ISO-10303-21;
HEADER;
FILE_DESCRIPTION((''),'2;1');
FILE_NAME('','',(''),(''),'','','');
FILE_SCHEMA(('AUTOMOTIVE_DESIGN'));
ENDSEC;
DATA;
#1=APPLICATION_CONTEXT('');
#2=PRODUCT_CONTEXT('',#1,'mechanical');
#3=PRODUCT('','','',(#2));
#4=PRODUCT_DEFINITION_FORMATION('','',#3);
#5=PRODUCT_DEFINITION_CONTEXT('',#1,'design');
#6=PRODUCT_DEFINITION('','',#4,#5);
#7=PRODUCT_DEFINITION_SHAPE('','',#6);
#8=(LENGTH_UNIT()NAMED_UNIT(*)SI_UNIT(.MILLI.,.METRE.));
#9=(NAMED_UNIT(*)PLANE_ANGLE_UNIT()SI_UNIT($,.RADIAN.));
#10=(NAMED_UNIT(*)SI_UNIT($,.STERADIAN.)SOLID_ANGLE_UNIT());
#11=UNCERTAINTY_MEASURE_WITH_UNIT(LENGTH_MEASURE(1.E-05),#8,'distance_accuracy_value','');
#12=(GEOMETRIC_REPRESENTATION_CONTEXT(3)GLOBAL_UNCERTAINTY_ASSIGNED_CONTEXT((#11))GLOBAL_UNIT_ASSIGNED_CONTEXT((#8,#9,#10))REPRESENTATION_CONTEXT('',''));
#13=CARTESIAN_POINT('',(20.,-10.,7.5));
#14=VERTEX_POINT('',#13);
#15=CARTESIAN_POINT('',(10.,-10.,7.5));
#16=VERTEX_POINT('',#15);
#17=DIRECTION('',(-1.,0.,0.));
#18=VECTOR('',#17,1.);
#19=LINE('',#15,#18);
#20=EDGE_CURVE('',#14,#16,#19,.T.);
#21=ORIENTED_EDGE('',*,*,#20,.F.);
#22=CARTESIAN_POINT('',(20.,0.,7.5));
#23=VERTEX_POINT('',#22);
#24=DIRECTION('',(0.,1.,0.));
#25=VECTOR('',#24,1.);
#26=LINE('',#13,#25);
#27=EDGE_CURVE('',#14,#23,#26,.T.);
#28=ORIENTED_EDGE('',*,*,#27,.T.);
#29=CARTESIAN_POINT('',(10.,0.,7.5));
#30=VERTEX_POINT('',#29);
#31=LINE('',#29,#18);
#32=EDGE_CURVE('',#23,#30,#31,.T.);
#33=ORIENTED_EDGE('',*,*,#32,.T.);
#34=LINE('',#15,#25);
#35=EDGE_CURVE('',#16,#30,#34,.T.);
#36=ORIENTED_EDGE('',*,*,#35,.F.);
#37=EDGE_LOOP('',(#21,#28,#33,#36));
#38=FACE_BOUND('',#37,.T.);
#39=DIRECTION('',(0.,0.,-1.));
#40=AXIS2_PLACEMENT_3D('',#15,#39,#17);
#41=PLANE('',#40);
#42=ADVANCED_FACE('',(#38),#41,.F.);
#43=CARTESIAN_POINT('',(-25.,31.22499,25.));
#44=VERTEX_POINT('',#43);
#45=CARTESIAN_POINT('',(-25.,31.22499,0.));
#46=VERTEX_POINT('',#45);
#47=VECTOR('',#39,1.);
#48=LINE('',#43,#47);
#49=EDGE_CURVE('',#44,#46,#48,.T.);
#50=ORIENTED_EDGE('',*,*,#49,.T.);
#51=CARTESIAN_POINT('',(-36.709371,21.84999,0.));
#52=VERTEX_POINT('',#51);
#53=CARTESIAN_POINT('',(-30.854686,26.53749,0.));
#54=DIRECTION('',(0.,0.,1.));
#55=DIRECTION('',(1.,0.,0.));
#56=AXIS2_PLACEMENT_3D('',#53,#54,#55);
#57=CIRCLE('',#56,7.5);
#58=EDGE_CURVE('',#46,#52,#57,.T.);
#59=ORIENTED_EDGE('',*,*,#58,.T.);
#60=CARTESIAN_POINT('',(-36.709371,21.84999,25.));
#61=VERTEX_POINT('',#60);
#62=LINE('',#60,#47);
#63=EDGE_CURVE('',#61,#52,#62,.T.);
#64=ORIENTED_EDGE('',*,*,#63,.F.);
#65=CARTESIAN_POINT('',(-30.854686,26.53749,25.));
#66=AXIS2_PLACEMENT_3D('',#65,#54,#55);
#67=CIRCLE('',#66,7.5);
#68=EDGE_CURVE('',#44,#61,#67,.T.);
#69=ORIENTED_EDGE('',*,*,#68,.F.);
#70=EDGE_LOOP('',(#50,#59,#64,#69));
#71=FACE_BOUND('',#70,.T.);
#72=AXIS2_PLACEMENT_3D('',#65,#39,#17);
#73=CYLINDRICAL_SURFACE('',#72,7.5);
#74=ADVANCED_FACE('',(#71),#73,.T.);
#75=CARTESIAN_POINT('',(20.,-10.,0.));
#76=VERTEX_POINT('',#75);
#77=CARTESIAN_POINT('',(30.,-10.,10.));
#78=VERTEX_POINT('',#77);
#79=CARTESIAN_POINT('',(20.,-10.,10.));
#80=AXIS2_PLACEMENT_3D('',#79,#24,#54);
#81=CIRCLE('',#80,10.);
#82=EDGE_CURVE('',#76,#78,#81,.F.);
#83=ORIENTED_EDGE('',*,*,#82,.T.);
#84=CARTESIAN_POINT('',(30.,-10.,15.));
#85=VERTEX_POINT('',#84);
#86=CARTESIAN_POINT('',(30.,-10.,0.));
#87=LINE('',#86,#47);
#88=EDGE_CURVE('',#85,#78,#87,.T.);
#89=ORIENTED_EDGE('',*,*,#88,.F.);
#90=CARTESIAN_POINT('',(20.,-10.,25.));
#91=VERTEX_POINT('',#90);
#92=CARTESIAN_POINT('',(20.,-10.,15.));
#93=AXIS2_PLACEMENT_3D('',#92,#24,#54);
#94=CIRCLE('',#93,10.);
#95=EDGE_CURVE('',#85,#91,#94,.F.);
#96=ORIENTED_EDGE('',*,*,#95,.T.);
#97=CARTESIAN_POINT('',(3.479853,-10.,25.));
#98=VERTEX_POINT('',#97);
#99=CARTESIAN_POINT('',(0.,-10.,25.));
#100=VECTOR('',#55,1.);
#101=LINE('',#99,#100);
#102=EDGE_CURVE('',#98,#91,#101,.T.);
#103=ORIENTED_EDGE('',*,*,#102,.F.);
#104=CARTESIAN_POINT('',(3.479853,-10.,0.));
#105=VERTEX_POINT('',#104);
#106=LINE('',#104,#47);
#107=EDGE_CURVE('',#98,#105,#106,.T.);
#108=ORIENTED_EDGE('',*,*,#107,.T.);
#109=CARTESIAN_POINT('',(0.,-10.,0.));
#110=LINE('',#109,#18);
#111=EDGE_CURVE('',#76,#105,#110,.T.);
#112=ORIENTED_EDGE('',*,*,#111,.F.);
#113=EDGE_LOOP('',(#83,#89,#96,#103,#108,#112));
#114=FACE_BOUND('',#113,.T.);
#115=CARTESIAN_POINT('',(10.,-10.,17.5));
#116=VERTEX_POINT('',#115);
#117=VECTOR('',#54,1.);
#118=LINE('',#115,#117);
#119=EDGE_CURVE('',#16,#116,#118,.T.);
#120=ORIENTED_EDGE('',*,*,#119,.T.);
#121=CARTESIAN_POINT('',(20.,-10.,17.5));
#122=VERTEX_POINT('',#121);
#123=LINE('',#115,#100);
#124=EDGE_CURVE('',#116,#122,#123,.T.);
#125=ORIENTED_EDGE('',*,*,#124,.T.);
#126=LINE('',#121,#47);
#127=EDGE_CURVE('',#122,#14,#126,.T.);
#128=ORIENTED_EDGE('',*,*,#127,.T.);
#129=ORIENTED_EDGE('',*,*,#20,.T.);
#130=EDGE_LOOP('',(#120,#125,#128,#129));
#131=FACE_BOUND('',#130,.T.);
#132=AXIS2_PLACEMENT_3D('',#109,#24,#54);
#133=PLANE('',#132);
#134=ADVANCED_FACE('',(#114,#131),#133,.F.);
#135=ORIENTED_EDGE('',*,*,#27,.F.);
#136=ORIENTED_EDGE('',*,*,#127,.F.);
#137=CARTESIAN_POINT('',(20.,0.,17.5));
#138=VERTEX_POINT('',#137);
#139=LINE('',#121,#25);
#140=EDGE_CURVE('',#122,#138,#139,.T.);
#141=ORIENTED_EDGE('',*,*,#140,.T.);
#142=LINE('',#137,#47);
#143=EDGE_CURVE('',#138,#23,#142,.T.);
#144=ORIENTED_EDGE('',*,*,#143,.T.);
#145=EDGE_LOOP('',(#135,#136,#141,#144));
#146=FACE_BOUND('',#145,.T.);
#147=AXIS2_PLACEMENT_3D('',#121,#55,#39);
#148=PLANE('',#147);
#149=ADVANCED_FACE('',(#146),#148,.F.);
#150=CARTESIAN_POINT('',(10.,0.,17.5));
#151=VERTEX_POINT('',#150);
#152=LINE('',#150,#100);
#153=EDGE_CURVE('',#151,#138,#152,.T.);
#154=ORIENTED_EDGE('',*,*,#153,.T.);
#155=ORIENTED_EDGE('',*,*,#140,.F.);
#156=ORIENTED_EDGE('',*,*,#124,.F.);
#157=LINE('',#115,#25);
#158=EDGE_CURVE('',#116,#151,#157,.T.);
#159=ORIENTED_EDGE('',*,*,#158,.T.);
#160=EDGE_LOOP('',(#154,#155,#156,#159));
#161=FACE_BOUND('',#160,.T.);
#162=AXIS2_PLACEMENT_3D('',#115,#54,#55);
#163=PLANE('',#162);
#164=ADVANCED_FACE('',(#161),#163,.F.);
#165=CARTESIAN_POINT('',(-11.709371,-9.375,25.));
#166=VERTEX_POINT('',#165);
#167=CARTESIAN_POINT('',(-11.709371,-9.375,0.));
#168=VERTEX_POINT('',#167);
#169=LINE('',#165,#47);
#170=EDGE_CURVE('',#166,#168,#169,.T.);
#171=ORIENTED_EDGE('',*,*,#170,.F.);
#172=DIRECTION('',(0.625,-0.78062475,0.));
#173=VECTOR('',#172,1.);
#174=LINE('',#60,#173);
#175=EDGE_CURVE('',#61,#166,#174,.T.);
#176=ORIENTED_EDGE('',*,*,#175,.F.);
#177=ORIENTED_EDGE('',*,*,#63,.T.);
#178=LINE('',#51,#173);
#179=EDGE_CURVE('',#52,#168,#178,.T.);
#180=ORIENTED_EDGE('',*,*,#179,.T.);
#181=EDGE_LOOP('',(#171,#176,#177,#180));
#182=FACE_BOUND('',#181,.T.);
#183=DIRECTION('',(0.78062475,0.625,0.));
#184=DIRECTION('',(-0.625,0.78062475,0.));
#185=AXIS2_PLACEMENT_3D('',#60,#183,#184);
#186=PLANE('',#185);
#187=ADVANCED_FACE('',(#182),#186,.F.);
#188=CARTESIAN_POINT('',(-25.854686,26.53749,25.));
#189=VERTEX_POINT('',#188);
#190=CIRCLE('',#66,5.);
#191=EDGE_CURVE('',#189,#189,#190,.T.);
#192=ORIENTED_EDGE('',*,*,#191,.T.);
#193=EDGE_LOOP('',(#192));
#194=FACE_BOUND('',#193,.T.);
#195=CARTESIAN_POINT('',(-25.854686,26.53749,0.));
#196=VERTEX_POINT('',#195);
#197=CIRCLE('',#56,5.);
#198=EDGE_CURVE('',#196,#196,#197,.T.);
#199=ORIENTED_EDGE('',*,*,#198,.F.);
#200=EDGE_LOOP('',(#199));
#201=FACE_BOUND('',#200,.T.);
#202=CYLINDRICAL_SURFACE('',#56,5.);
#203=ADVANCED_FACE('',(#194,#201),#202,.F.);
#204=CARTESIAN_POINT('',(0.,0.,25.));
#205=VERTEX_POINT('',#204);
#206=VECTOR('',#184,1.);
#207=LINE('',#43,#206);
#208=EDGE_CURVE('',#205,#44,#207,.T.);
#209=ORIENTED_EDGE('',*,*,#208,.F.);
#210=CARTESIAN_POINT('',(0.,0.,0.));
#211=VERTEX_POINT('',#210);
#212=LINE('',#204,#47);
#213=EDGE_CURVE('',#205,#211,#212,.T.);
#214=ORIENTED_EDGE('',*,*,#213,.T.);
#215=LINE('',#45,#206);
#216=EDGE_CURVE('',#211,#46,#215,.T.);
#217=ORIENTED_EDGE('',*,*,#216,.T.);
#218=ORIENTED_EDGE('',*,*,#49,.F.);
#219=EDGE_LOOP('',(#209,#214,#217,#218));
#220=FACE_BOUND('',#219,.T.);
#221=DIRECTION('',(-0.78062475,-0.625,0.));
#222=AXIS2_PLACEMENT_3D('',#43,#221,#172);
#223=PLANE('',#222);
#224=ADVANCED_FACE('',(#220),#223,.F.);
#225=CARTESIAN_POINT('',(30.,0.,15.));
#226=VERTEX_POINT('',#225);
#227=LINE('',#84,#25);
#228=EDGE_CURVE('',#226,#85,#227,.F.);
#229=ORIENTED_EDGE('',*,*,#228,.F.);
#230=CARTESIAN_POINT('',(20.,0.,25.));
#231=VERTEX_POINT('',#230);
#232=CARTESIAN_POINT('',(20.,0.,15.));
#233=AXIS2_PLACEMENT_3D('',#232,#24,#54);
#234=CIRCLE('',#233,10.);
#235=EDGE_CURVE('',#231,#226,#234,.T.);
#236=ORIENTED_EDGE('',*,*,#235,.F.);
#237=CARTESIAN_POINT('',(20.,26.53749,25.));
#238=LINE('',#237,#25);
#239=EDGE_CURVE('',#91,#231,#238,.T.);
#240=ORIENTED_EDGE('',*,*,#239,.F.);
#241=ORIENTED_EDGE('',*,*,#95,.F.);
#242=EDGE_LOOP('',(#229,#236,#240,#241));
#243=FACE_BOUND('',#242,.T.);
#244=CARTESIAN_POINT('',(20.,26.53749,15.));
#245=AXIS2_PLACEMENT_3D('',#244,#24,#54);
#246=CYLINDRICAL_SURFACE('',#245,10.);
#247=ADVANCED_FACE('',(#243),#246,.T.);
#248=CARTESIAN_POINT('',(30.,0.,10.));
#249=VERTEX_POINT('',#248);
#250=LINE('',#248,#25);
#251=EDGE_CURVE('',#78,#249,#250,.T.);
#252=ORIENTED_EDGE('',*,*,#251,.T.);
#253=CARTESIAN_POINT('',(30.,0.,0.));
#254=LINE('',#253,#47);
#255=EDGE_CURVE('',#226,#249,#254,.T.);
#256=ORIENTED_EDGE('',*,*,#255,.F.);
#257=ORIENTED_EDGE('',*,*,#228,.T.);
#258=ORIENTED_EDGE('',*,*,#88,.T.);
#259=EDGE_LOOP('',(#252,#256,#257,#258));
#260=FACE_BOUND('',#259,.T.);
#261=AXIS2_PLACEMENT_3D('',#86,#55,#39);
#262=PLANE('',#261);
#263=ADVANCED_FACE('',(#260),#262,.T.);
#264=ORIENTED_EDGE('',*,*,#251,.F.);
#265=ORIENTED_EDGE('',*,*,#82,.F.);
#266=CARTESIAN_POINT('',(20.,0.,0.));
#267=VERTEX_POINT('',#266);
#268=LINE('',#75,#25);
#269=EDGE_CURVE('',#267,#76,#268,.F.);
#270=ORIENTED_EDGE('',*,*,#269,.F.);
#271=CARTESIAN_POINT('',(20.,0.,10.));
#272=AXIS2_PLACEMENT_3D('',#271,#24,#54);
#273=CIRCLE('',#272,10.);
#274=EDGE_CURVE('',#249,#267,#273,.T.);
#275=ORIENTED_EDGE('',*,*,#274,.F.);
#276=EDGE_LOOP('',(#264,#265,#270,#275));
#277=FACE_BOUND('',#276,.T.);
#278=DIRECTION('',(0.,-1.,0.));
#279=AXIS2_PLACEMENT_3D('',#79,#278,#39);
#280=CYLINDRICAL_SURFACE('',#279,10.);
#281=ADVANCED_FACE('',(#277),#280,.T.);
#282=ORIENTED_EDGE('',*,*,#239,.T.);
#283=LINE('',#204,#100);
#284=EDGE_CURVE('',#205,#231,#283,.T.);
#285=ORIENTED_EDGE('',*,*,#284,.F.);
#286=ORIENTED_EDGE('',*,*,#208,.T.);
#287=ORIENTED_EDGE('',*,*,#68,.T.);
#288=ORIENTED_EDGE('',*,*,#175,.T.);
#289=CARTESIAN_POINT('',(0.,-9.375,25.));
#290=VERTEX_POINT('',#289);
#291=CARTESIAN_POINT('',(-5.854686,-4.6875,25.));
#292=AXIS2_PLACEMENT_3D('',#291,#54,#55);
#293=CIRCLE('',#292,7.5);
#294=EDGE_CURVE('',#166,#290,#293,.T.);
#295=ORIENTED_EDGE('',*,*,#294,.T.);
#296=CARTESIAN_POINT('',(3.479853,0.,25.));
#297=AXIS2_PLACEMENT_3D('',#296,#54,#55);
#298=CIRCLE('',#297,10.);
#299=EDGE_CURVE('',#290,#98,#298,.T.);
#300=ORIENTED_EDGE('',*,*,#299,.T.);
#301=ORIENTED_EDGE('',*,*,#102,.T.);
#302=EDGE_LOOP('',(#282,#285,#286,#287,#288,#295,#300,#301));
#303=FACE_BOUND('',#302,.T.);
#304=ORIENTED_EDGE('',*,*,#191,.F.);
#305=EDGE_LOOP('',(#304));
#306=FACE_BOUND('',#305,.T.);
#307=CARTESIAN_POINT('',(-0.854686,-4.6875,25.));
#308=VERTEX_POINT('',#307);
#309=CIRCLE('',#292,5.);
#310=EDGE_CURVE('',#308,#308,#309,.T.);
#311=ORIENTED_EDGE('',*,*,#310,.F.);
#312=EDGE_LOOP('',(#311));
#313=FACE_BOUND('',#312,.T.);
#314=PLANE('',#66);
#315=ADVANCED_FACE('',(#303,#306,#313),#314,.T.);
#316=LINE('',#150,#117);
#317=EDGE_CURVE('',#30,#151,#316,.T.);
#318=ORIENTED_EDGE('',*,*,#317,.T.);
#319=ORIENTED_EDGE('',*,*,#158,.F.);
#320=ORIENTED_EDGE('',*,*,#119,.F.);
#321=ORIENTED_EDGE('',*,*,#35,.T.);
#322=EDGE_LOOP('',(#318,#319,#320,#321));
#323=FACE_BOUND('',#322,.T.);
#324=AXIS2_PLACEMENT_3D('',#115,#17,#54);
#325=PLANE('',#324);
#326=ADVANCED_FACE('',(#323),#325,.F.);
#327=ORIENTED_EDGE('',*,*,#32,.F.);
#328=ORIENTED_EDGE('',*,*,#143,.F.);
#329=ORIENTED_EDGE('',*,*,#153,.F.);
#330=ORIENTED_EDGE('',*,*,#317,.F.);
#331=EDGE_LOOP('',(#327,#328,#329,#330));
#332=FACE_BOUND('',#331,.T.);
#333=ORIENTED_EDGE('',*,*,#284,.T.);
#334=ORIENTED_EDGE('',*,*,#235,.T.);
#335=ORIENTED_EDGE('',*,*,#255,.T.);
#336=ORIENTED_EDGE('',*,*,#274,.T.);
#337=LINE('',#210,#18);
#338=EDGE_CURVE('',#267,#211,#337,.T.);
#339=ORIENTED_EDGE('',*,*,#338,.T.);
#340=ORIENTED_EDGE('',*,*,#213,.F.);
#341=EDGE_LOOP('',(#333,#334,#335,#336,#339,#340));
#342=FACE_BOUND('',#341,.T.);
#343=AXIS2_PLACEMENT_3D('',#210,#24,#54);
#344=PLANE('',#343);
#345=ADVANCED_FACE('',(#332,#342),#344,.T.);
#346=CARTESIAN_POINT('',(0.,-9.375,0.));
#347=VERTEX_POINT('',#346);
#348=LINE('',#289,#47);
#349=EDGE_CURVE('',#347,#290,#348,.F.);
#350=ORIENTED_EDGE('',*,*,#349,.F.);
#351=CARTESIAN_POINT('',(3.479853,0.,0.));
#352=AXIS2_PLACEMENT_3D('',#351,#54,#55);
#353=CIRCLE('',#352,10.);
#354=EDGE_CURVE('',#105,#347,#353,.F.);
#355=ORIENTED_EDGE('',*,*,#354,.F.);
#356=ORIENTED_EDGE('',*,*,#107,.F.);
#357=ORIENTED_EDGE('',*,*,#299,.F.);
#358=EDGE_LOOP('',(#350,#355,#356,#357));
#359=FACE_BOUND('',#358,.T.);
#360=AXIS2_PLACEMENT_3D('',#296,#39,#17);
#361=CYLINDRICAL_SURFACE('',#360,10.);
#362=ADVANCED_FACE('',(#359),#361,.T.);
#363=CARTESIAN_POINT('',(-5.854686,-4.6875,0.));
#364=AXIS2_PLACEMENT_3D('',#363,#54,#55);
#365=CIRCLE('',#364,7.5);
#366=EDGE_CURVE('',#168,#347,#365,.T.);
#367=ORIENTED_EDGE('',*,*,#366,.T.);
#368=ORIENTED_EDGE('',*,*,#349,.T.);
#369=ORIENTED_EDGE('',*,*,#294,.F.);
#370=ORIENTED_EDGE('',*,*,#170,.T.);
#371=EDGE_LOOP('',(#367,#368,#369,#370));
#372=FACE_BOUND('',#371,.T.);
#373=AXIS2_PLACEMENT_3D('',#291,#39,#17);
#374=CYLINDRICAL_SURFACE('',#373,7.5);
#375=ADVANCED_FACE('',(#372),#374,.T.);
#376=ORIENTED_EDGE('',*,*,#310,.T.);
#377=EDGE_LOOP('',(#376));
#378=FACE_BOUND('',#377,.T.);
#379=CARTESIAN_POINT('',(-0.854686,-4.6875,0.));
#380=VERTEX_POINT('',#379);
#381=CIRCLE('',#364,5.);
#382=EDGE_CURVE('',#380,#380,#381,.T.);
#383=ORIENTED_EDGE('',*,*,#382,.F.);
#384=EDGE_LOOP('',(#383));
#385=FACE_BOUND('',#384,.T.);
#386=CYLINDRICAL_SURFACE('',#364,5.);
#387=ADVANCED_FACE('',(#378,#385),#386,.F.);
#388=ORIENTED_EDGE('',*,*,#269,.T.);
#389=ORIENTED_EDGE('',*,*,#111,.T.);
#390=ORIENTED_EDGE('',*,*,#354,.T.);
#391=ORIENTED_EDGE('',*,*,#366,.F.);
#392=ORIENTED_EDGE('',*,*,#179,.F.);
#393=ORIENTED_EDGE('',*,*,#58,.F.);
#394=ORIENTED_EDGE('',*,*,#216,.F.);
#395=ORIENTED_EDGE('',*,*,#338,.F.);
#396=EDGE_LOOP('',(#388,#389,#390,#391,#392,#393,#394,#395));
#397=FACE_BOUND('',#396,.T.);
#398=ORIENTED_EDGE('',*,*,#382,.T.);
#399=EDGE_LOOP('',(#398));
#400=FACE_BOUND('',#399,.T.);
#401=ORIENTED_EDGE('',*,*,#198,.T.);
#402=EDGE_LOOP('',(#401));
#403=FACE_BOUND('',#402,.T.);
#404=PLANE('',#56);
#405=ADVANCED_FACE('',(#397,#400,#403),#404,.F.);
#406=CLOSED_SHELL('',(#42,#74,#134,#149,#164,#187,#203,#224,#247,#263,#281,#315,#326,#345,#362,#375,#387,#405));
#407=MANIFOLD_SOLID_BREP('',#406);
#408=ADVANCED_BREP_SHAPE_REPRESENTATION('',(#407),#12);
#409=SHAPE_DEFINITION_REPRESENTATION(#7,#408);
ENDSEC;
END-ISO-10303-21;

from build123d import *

# Parameters (mm, degrees)
EXTRUDE_1_DEPTH     = 25
SKETCH_2_R          = 5
CUT_EXTRUDE_1_DEPTH = 58.049387676
SKETCH_6_W          = 30
SKETCH_6_H          = 25
EXTRUDE_2_DEPTH     = 10
SKETCH_7_W          = 10
SKETCH_7_H          = 10
CUT_EXTRUDE_2_DEPTH = 10
FILLET_1_R          = 10
FILLET_2_R          = 10


with BuildPart() as part:
    # 草图1 → 凸台-拉伸1 (new body)
    with BuildSketch(Plane.XY):
        with BuildLine():
            Line((-25, 31.224989992), (0, 0))
            ThreePointArc((0, 0), (-1.167185623, -10.542185623), (-11.709371247, -9.375))
            Line((-11.709371247, -9.375), (-36.709371247, 21.849989992))
            ThreePointArc((-36.709371247, 21.849989992), (-35.542185623, 32.392175615), (-25, 31.224989992))
        make_face()
    extrude(amount=EXTRUDE_1_DEPTH)

    # 草图2 → 切除-拉伸1 (cut, through all)
    with BuildSketch(Plane.XY.offset(25)):
        with Locations((-30.854685623, 26.537489992)):
            Circle(SKETCH_2_R)
        with Locations((-5.854685623, -4.6875)):
            Circle(SKETCH_2_R)
    extrude(amount=-CUT_EXTRUDE_1_DEPTH, mode=Mode.SUBTRACT)

    # 草图6 → 凸台-拉伸2 (add)
    with BuildSketch(Plane(origin=(0, 0, 0), x_dir=(1, 0, 0), z_dir=(0, 1, 0))):
        with Locations((15, -12.5)):
            Rectangle(SKETCH_6_W, SKETCH_6_H)
    extrude(amount=-EXTRUDE_2_DEPTH)

    # 草图7 → 切除-拉伸2 (cut)
    with BuildSketch(Plane(origin=(0, 0, 0), x_dir=(1, 0, 0), z_dir=(0, 1, 0))):
        with Locations((15, -12.5)):
            Rectangle(SKETCH_7_W, SKETCH_7_H)
    extrude(amount=-CUT_EXTRUDE_2_DEPTH, mode=Mode.SUBTRACT)

    # 圆角1
    fillet_1_edges = [part.edges().sort_by_distance(p)[0] for p in [
        (30, -5, 0),
        (30, -5, 25),
    ]]
    fillet(fillet_1_edges, radius=FILLET_1_R)

    # 圆角2
    # the kernel refuses this fillet: 10 mm, written as the material it takes off along each edge
    with BuildSketch(Plane(origin=(0, -10, 33.699631817), x_dir=(1, 0, 0), z_dir=(0, 0, -1))) as fillet_2_piece_1:
        with BuildLine():
            CenterArc((3.479852727, -10), FILLET_2_R, 90, 20.364134806)
            Line((0, -0.625), (-0.069597055, -0.4375))
            ThreePointArc((-0.069597055, -0.4375), (-0.2, -0.3125), (-0.2, 0))
            Line((-0.2, 0), (0, 0.2))
            Line((0, 0.2), (3.479852727, 0.2))
            Line((3.479852727, 0.2), (3.479852727, 0))
        make_face()
    extrude(amount=42.399263634, mode=Mode.SUBTRACT)


solid = part.part
